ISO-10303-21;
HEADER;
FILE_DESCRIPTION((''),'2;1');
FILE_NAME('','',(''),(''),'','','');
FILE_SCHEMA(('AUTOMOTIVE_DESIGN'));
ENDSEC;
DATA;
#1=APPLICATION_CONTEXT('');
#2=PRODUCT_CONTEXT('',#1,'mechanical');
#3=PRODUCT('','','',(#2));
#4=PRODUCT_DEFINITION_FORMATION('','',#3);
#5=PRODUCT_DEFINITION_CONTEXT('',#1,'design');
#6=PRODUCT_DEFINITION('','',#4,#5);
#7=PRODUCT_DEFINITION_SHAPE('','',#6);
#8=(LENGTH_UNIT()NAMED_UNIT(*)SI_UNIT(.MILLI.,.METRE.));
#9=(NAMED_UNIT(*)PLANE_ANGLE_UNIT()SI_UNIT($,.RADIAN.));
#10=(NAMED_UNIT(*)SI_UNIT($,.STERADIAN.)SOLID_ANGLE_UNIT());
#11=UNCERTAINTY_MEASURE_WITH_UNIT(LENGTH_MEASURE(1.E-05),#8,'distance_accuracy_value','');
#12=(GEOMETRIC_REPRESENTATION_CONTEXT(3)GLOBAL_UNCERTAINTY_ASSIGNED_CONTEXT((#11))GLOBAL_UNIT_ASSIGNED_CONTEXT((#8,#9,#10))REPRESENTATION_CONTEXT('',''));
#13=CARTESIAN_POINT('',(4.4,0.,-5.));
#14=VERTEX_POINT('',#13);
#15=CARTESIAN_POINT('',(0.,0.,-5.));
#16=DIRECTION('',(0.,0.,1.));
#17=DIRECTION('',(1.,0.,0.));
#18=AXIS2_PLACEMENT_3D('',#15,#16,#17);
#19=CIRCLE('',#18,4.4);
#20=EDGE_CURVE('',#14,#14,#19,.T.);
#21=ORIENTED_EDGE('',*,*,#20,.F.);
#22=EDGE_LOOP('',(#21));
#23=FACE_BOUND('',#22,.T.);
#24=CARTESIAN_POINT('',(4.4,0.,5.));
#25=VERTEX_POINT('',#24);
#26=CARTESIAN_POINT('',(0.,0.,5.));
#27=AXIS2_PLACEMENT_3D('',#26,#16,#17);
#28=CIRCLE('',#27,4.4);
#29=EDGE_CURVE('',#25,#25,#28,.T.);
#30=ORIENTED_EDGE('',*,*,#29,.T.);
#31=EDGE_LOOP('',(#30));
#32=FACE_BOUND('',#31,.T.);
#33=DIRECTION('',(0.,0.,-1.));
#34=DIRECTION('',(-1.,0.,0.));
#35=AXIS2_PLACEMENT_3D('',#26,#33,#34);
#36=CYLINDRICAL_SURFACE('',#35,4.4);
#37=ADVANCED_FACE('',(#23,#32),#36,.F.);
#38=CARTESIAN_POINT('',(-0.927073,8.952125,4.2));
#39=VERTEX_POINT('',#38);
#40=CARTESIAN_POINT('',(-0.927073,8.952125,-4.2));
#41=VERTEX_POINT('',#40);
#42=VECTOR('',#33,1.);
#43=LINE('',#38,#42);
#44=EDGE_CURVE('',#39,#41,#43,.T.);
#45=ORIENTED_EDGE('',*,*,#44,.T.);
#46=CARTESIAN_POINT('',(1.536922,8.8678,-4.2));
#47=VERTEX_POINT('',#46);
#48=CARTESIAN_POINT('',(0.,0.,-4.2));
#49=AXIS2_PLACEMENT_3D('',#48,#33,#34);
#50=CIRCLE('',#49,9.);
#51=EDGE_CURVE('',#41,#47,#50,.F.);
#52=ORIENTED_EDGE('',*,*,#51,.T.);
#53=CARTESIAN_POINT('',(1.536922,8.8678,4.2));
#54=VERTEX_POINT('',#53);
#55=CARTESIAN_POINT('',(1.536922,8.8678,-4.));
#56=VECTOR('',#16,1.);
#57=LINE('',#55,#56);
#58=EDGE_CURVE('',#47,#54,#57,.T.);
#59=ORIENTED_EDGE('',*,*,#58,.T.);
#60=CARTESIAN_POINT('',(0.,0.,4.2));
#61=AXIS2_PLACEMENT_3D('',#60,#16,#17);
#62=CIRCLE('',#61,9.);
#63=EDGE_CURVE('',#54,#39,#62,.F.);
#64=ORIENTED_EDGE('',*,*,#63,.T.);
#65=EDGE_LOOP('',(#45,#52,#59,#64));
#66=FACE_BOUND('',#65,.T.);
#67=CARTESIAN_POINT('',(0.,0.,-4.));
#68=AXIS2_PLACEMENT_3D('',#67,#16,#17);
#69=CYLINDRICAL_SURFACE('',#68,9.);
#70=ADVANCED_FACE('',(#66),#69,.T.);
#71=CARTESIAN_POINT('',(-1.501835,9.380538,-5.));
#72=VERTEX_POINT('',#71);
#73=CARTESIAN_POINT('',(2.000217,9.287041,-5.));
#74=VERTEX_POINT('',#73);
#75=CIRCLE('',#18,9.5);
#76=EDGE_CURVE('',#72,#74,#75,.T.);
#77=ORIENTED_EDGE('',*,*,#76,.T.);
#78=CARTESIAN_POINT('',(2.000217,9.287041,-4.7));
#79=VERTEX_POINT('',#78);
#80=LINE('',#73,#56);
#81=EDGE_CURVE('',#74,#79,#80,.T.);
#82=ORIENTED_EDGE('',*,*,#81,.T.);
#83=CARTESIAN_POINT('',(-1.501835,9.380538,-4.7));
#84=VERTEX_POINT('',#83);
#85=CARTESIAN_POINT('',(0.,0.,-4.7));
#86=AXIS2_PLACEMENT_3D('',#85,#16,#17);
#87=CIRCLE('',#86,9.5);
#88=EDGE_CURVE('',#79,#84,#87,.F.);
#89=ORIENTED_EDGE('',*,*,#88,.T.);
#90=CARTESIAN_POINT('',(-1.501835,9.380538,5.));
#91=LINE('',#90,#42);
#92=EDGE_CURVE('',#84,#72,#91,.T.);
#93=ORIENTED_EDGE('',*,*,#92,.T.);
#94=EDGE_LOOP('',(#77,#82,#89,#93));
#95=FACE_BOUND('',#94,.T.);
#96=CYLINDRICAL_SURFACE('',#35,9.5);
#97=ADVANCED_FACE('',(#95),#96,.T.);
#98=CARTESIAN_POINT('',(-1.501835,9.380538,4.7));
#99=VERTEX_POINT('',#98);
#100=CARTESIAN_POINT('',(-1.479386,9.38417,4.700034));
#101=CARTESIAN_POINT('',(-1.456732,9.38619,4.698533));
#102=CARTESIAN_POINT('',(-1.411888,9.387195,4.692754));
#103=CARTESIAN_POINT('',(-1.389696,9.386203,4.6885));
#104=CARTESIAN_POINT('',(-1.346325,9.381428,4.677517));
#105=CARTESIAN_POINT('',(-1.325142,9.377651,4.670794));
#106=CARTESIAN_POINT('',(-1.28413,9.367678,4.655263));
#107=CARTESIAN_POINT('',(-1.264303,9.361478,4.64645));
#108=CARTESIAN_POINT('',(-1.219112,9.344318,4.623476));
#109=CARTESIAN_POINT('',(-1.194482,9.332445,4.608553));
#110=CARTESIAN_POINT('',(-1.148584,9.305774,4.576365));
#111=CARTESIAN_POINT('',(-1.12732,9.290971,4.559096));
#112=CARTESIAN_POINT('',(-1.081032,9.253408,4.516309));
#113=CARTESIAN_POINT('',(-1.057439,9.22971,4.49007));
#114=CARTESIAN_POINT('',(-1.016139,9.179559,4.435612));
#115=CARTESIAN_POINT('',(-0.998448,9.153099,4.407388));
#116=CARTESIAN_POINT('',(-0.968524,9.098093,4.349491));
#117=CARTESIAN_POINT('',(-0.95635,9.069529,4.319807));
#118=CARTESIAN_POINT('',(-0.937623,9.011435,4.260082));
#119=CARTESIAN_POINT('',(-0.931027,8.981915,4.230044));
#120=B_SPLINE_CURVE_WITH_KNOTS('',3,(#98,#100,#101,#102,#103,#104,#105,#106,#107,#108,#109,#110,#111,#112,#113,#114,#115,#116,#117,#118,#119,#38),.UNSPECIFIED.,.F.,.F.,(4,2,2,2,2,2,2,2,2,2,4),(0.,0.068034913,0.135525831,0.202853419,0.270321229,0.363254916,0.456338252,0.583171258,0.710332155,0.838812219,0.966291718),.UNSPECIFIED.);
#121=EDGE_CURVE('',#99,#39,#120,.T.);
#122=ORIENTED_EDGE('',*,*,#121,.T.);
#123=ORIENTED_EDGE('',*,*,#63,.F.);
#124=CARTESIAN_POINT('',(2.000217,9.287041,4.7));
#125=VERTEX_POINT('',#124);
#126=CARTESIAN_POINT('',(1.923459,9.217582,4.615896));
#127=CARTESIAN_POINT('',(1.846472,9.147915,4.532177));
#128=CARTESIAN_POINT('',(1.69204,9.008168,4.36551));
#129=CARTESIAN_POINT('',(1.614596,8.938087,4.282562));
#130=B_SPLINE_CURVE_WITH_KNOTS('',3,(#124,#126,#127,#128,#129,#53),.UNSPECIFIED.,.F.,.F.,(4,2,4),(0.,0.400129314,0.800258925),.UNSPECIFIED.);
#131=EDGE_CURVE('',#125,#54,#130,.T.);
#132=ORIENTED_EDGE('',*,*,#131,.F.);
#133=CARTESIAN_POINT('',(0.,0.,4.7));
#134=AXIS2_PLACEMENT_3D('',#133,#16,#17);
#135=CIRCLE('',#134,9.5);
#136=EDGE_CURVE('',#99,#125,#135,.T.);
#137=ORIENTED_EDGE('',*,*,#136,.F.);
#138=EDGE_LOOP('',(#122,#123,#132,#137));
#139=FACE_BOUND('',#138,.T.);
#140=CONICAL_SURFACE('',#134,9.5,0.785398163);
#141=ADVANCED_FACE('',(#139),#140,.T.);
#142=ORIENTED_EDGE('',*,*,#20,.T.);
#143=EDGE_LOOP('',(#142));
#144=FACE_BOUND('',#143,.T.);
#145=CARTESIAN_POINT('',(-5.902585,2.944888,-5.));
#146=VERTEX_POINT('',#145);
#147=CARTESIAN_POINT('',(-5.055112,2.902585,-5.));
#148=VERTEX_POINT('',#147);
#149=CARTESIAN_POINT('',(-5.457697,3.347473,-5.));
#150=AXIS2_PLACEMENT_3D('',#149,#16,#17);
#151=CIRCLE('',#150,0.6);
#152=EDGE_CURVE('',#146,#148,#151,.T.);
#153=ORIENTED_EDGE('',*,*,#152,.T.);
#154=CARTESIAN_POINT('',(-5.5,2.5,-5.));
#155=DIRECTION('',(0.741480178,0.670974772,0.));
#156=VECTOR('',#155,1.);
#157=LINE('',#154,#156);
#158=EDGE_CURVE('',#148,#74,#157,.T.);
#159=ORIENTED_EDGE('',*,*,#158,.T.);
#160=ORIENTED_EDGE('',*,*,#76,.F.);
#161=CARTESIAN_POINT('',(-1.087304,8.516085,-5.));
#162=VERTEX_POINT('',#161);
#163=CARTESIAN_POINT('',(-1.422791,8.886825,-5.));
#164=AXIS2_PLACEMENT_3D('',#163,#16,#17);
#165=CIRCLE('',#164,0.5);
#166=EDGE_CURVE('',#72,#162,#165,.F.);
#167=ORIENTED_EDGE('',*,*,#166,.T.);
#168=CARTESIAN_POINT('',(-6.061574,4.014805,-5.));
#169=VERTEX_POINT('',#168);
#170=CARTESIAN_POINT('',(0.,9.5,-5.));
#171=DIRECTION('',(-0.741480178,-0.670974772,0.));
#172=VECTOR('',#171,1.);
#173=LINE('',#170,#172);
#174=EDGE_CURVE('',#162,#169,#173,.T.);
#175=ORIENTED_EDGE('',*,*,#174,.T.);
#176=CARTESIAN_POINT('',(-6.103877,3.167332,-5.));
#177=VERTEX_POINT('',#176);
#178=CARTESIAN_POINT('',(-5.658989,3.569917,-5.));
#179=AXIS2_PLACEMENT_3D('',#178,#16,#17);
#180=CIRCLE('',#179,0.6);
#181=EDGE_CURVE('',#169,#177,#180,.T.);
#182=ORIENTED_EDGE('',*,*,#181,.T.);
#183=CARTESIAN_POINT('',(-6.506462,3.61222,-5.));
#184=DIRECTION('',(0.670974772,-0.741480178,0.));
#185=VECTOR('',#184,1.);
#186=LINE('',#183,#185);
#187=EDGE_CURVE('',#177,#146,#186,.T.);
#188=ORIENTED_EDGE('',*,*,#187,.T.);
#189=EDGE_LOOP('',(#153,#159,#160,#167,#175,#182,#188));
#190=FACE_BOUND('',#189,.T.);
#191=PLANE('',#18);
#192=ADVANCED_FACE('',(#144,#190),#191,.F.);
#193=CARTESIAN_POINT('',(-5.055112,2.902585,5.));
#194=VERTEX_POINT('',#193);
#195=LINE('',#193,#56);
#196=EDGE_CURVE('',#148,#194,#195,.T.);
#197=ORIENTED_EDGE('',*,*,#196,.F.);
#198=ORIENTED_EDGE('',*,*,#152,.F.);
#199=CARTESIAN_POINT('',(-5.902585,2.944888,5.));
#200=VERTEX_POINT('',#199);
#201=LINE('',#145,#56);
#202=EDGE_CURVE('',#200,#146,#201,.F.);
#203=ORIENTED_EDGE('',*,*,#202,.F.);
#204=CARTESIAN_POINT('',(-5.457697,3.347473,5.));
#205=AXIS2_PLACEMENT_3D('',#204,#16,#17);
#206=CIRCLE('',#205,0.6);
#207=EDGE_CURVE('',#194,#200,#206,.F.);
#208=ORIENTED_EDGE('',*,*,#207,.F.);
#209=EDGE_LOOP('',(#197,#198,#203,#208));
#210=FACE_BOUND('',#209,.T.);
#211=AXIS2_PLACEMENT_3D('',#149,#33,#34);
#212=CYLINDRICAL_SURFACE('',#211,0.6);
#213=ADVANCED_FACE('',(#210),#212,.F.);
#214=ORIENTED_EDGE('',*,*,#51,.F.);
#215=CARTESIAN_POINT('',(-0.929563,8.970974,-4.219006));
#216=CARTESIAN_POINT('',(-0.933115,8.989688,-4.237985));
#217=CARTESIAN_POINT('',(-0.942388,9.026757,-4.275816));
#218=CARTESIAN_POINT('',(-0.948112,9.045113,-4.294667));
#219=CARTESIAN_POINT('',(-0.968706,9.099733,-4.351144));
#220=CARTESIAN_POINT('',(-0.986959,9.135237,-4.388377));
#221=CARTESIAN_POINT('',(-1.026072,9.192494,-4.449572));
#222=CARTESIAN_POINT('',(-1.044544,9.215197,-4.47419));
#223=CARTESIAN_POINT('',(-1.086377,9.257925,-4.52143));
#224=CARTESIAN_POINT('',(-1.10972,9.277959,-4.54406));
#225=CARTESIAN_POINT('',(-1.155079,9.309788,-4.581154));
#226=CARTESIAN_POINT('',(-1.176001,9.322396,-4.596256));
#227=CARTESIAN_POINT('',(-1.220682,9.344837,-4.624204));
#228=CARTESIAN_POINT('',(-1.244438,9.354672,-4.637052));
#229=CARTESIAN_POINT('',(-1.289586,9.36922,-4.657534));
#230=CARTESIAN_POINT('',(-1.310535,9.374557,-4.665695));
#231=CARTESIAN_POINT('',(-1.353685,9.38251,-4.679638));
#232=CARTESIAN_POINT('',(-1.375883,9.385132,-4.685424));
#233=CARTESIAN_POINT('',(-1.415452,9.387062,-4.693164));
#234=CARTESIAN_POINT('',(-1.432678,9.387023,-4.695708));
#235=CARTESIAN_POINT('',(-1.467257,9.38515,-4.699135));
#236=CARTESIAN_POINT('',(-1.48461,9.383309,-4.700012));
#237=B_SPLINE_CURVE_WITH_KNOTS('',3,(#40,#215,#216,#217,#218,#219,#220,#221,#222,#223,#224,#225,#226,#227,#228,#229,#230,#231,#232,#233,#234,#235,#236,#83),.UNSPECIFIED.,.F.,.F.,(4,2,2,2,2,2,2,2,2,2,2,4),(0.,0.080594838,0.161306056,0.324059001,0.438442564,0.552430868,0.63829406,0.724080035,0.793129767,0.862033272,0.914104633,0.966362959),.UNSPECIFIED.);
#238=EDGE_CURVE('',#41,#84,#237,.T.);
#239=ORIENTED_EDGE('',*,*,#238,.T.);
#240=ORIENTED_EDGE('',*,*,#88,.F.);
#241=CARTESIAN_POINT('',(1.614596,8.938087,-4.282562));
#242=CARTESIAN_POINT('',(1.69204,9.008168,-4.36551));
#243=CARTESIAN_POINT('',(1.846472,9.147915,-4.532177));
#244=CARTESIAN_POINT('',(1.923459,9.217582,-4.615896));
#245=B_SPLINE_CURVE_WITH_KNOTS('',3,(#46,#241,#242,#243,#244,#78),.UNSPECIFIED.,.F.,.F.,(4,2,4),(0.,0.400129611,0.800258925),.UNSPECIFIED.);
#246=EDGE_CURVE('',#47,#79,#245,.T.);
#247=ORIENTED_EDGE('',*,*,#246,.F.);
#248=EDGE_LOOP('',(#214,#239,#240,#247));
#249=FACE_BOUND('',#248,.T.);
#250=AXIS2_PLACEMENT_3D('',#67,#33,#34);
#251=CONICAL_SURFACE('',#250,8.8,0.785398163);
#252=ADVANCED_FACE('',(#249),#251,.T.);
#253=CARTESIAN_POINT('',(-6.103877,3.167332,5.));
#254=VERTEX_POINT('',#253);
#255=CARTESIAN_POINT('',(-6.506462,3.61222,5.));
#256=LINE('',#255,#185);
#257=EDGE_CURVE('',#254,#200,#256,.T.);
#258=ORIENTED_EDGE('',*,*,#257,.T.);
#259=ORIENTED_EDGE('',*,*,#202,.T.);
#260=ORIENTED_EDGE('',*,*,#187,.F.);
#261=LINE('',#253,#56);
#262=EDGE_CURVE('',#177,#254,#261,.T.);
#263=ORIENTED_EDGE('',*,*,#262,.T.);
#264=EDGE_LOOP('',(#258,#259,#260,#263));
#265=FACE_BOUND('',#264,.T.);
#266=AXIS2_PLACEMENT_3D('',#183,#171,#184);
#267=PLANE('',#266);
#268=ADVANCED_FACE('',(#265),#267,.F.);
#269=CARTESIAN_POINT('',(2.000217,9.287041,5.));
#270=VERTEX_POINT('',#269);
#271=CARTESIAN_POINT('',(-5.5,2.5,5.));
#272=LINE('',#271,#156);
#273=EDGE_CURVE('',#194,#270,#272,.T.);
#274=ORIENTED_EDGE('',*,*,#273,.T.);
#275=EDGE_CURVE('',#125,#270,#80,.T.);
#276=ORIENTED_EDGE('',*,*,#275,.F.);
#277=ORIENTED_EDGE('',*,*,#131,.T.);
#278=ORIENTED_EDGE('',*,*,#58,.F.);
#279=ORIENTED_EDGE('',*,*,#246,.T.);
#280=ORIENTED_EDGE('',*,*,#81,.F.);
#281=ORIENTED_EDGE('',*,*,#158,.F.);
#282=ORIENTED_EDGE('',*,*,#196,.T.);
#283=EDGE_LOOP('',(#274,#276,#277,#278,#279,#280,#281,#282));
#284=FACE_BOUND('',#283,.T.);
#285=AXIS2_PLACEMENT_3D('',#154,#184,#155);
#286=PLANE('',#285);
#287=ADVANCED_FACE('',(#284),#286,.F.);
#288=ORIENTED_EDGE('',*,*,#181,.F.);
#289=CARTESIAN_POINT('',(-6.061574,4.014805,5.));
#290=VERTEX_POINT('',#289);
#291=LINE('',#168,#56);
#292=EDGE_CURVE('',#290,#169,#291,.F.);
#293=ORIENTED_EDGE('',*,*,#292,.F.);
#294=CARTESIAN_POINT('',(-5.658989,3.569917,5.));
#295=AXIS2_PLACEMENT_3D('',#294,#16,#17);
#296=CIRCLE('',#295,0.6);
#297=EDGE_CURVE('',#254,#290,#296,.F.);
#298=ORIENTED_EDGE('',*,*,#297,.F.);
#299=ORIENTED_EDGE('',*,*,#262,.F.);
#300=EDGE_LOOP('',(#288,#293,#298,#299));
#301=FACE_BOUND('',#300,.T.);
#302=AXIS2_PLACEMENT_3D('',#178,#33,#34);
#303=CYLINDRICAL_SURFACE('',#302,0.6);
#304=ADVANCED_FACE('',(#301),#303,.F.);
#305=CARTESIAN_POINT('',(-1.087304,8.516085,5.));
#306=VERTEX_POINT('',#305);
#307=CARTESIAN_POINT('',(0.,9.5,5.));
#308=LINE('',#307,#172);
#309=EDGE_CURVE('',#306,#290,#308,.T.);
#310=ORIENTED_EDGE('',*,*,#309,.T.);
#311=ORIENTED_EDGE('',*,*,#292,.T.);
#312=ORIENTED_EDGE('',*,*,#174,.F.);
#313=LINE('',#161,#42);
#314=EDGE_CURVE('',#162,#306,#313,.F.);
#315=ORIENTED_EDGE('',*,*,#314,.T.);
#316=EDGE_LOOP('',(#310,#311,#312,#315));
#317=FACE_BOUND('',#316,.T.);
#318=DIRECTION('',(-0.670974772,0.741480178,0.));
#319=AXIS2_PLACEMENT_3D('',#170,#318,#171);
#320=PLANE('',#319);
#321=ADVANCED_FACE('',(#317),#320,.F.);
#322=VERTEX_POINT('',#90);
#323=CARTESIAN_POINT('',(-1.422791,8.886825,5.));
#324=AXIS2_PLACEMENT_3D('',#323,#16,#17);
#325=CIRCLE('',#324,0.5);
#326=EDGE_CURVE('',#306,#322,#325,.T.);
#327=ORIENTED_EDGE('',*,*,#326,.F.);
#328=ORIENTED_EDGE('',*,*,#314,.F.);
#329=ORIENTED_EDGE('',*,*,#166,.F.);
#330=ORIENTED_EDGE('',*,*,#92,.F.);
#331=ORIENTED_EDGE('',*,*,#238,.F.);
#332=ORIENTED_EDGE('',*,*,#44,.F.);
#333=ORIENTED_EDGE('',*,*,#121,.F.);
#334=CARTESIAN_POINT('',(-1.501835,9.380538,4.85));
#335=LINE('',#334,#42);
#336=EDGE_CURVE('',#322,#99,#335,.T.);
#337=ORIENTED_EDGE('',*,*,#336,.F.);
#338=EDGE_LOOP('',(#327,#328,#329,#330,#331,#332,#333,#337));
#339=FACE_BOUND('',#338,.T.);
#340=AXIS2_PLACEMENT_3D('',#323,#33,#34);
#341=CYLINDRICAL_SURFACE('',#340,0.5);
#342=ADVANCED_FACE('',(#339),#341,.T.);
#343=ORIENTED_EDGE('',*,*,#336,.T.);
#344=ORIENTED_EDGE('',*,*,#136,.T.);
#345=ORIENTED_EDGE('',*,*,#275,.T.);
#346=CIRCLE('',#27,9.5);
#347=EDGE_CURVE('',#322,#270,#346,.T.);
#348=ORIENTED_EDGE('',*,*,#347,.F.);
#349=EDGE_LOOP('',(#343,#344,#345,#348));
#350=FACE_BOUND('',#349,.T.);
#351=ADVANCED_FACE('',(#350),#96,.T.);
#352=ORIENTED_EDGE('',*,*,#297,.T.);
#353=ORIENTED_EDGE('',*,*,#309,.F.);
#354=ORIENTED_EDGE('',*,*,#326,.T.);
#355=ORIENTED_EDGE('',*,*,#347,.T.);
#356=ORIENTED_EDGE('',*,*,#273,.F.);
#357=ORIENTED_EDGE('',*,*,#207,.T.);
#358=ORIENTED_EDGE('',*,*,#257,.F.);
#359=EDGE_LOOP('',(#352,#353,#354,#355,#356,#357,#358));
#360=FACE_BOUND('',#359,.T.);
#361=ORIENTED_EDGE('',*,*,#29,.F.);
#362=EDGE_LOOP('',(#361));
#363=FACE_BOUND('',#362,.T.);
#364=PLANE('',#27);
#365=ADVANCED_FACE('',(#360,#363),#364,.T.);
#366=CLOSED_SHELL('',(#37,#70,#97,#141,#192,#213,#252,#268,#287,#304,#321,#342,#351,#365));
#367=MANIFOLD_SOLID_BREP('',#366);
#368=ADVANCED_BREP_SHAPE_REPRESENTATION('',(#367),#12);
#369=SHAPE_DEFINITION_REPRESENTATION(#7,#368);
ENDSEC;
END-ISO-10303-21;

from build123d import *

# Parameters (mm, degrees)
SKETCH1_R           = 9.5
SKETCH1_R_2         = 4.4
BOSS_EXTRUDE1_DEPTH = 5
CUT_EXTRUDE1_DEPTH  = 17.748134224444225
SKETCH3_R           = 9.5
SKETCH3_R_2         = 9
CUT_EXTRUDE2_DEPTH  = 4
CHAMFER1_SIZE       = 0.7
FILLET1_R           = 0.5
FILLET2_R           = 0.6


with BuildPart() as part:
    # Sketch1 → Boss-Extrude1 (new, symmetric)
    with BuildSketch(Plane.XY):
        Circle(SKETCH1_R)
        Circle(SKETCH1_R_2, mode=Mode.SUBTRACT)
    extrude(amount=BOSS_EXTRUDE1_DEPTH, both=True)

    # Sketch2 → Cut-Extrude1 (cut, through all)
    with BuildSketch(Plane.XY.offset(5)):
        with BuildLine():
            Line((0, 9.5), (-6.506462158581922, 3.612220267457224))
            Line((-6.506462158581922, 3.612220267457224), (-5.500000000000001, 2.4999999999999996))
            Line((-5.500000000000001, 2.4999999999999996), (2.000217039706271, 9.287041067749655))
            ThreePointArc((2.000217039706271, 9.287041067749655), (1.0057608702813652, 9.446610242399696), (0, 9.5))
        make_face()
    extrude(amount=-CUT_EXTRUDE1_DEPTH, mode=Mode.SUBTRACT)

    # Sketch3 → Cut-Extrude2 (cut, symmetric)
    with BuildSketch(Plane.XY):
        Circle(SKETCH3_R)
        Circle(SKETCH3_R_2, mode=Mode.SUBTRACT)
    extrude(amount=CUT_EXTRUDE2_DEPTH, both=True, mode=Mode.SUBTRACT)

    # Chamfer1
    # the kernel refuses this chamfer: 0.7 mm, written as the material it takes off along each edge
    with BuildSketch(Plane(origin=(0, 0, 4), x_dir=(0.10274511100346817, 0.9947077169525151, 0), z_dir=(0.9947077169525151, -0.10274511100346817, 0))) as chamfer1_piece_1_section:
        Polygon((9.5, CHAMFER1_SIZE), (9.5 - CHAMFER1_SIZE, 0), (9.5, 0), align=None)
    chamfer1_piece_1 = revolve(axis=Axis((0, 0, 4), (0, 0, 1)), revolution_arc=359.64, mode=Mode.PRIVATE)
    chamfer1_piece_1 = chamfer1_piece_1 - Plane(origin=(0, 0, 4.439831857806262), x_dir=(1, 0, 0), z_dir=(0, 0, -1)) * Cylinder(9, 38, mode=Mode.PRIVATE)
    add(chamfer1_piece_1, mode=Mode.SUBTRACT)
    with BuildSketch(Plane(origin=(0, 0, -4), x_dir=(0.10274511100346817, 0.9947077169525151, 0), z_dir=(0.9947077169525151, -0.10274511100346817, 0))) as chamfer1_piece_2_section:
        Polygon((9.5 - CHAMFER1_SIZE, 0), (9.5, -CHAMFER1_SIZE), (9.5, 0), align=None)
    chamfer1_piece_2 = revolve(axis=Axis((0, 0, -4), (0, 0, 1)), revolution_arc=359.64, mode=Mode.PRIVATE)
    chamfer1_piece_2 = chamfer1_piece_2 - Plane(origin=(0, 0, -4.439831857806264), x_dir=(1, 0, 0), z_dir=(0, 0, -1)) * Cylinder(9, 38, mode=Mode.PRIVATE)
    add(chamfer1_piece_2, mode=Mode.SUBTRACT)

    # Fillet1
    fillet1_edges = [part.edges().sort_by_distance(p)[0] for p in [
        (3e-17, 9.5, 4.85),
    ]]
    fillet(fillet1_edges, radius=FILLET1_R)

    # Fillet2
    fillet2_edges = [part.edges().sort_by_distance(p)[0] for p in [
        (-5.500000000000001, 2.4999999999999996, 0),
        (-6.506462158581922, 3.612220267457224, 0),
    ]]
    fillet(fillet2_edges, radius=FILLET2_R)


solid = part.part
